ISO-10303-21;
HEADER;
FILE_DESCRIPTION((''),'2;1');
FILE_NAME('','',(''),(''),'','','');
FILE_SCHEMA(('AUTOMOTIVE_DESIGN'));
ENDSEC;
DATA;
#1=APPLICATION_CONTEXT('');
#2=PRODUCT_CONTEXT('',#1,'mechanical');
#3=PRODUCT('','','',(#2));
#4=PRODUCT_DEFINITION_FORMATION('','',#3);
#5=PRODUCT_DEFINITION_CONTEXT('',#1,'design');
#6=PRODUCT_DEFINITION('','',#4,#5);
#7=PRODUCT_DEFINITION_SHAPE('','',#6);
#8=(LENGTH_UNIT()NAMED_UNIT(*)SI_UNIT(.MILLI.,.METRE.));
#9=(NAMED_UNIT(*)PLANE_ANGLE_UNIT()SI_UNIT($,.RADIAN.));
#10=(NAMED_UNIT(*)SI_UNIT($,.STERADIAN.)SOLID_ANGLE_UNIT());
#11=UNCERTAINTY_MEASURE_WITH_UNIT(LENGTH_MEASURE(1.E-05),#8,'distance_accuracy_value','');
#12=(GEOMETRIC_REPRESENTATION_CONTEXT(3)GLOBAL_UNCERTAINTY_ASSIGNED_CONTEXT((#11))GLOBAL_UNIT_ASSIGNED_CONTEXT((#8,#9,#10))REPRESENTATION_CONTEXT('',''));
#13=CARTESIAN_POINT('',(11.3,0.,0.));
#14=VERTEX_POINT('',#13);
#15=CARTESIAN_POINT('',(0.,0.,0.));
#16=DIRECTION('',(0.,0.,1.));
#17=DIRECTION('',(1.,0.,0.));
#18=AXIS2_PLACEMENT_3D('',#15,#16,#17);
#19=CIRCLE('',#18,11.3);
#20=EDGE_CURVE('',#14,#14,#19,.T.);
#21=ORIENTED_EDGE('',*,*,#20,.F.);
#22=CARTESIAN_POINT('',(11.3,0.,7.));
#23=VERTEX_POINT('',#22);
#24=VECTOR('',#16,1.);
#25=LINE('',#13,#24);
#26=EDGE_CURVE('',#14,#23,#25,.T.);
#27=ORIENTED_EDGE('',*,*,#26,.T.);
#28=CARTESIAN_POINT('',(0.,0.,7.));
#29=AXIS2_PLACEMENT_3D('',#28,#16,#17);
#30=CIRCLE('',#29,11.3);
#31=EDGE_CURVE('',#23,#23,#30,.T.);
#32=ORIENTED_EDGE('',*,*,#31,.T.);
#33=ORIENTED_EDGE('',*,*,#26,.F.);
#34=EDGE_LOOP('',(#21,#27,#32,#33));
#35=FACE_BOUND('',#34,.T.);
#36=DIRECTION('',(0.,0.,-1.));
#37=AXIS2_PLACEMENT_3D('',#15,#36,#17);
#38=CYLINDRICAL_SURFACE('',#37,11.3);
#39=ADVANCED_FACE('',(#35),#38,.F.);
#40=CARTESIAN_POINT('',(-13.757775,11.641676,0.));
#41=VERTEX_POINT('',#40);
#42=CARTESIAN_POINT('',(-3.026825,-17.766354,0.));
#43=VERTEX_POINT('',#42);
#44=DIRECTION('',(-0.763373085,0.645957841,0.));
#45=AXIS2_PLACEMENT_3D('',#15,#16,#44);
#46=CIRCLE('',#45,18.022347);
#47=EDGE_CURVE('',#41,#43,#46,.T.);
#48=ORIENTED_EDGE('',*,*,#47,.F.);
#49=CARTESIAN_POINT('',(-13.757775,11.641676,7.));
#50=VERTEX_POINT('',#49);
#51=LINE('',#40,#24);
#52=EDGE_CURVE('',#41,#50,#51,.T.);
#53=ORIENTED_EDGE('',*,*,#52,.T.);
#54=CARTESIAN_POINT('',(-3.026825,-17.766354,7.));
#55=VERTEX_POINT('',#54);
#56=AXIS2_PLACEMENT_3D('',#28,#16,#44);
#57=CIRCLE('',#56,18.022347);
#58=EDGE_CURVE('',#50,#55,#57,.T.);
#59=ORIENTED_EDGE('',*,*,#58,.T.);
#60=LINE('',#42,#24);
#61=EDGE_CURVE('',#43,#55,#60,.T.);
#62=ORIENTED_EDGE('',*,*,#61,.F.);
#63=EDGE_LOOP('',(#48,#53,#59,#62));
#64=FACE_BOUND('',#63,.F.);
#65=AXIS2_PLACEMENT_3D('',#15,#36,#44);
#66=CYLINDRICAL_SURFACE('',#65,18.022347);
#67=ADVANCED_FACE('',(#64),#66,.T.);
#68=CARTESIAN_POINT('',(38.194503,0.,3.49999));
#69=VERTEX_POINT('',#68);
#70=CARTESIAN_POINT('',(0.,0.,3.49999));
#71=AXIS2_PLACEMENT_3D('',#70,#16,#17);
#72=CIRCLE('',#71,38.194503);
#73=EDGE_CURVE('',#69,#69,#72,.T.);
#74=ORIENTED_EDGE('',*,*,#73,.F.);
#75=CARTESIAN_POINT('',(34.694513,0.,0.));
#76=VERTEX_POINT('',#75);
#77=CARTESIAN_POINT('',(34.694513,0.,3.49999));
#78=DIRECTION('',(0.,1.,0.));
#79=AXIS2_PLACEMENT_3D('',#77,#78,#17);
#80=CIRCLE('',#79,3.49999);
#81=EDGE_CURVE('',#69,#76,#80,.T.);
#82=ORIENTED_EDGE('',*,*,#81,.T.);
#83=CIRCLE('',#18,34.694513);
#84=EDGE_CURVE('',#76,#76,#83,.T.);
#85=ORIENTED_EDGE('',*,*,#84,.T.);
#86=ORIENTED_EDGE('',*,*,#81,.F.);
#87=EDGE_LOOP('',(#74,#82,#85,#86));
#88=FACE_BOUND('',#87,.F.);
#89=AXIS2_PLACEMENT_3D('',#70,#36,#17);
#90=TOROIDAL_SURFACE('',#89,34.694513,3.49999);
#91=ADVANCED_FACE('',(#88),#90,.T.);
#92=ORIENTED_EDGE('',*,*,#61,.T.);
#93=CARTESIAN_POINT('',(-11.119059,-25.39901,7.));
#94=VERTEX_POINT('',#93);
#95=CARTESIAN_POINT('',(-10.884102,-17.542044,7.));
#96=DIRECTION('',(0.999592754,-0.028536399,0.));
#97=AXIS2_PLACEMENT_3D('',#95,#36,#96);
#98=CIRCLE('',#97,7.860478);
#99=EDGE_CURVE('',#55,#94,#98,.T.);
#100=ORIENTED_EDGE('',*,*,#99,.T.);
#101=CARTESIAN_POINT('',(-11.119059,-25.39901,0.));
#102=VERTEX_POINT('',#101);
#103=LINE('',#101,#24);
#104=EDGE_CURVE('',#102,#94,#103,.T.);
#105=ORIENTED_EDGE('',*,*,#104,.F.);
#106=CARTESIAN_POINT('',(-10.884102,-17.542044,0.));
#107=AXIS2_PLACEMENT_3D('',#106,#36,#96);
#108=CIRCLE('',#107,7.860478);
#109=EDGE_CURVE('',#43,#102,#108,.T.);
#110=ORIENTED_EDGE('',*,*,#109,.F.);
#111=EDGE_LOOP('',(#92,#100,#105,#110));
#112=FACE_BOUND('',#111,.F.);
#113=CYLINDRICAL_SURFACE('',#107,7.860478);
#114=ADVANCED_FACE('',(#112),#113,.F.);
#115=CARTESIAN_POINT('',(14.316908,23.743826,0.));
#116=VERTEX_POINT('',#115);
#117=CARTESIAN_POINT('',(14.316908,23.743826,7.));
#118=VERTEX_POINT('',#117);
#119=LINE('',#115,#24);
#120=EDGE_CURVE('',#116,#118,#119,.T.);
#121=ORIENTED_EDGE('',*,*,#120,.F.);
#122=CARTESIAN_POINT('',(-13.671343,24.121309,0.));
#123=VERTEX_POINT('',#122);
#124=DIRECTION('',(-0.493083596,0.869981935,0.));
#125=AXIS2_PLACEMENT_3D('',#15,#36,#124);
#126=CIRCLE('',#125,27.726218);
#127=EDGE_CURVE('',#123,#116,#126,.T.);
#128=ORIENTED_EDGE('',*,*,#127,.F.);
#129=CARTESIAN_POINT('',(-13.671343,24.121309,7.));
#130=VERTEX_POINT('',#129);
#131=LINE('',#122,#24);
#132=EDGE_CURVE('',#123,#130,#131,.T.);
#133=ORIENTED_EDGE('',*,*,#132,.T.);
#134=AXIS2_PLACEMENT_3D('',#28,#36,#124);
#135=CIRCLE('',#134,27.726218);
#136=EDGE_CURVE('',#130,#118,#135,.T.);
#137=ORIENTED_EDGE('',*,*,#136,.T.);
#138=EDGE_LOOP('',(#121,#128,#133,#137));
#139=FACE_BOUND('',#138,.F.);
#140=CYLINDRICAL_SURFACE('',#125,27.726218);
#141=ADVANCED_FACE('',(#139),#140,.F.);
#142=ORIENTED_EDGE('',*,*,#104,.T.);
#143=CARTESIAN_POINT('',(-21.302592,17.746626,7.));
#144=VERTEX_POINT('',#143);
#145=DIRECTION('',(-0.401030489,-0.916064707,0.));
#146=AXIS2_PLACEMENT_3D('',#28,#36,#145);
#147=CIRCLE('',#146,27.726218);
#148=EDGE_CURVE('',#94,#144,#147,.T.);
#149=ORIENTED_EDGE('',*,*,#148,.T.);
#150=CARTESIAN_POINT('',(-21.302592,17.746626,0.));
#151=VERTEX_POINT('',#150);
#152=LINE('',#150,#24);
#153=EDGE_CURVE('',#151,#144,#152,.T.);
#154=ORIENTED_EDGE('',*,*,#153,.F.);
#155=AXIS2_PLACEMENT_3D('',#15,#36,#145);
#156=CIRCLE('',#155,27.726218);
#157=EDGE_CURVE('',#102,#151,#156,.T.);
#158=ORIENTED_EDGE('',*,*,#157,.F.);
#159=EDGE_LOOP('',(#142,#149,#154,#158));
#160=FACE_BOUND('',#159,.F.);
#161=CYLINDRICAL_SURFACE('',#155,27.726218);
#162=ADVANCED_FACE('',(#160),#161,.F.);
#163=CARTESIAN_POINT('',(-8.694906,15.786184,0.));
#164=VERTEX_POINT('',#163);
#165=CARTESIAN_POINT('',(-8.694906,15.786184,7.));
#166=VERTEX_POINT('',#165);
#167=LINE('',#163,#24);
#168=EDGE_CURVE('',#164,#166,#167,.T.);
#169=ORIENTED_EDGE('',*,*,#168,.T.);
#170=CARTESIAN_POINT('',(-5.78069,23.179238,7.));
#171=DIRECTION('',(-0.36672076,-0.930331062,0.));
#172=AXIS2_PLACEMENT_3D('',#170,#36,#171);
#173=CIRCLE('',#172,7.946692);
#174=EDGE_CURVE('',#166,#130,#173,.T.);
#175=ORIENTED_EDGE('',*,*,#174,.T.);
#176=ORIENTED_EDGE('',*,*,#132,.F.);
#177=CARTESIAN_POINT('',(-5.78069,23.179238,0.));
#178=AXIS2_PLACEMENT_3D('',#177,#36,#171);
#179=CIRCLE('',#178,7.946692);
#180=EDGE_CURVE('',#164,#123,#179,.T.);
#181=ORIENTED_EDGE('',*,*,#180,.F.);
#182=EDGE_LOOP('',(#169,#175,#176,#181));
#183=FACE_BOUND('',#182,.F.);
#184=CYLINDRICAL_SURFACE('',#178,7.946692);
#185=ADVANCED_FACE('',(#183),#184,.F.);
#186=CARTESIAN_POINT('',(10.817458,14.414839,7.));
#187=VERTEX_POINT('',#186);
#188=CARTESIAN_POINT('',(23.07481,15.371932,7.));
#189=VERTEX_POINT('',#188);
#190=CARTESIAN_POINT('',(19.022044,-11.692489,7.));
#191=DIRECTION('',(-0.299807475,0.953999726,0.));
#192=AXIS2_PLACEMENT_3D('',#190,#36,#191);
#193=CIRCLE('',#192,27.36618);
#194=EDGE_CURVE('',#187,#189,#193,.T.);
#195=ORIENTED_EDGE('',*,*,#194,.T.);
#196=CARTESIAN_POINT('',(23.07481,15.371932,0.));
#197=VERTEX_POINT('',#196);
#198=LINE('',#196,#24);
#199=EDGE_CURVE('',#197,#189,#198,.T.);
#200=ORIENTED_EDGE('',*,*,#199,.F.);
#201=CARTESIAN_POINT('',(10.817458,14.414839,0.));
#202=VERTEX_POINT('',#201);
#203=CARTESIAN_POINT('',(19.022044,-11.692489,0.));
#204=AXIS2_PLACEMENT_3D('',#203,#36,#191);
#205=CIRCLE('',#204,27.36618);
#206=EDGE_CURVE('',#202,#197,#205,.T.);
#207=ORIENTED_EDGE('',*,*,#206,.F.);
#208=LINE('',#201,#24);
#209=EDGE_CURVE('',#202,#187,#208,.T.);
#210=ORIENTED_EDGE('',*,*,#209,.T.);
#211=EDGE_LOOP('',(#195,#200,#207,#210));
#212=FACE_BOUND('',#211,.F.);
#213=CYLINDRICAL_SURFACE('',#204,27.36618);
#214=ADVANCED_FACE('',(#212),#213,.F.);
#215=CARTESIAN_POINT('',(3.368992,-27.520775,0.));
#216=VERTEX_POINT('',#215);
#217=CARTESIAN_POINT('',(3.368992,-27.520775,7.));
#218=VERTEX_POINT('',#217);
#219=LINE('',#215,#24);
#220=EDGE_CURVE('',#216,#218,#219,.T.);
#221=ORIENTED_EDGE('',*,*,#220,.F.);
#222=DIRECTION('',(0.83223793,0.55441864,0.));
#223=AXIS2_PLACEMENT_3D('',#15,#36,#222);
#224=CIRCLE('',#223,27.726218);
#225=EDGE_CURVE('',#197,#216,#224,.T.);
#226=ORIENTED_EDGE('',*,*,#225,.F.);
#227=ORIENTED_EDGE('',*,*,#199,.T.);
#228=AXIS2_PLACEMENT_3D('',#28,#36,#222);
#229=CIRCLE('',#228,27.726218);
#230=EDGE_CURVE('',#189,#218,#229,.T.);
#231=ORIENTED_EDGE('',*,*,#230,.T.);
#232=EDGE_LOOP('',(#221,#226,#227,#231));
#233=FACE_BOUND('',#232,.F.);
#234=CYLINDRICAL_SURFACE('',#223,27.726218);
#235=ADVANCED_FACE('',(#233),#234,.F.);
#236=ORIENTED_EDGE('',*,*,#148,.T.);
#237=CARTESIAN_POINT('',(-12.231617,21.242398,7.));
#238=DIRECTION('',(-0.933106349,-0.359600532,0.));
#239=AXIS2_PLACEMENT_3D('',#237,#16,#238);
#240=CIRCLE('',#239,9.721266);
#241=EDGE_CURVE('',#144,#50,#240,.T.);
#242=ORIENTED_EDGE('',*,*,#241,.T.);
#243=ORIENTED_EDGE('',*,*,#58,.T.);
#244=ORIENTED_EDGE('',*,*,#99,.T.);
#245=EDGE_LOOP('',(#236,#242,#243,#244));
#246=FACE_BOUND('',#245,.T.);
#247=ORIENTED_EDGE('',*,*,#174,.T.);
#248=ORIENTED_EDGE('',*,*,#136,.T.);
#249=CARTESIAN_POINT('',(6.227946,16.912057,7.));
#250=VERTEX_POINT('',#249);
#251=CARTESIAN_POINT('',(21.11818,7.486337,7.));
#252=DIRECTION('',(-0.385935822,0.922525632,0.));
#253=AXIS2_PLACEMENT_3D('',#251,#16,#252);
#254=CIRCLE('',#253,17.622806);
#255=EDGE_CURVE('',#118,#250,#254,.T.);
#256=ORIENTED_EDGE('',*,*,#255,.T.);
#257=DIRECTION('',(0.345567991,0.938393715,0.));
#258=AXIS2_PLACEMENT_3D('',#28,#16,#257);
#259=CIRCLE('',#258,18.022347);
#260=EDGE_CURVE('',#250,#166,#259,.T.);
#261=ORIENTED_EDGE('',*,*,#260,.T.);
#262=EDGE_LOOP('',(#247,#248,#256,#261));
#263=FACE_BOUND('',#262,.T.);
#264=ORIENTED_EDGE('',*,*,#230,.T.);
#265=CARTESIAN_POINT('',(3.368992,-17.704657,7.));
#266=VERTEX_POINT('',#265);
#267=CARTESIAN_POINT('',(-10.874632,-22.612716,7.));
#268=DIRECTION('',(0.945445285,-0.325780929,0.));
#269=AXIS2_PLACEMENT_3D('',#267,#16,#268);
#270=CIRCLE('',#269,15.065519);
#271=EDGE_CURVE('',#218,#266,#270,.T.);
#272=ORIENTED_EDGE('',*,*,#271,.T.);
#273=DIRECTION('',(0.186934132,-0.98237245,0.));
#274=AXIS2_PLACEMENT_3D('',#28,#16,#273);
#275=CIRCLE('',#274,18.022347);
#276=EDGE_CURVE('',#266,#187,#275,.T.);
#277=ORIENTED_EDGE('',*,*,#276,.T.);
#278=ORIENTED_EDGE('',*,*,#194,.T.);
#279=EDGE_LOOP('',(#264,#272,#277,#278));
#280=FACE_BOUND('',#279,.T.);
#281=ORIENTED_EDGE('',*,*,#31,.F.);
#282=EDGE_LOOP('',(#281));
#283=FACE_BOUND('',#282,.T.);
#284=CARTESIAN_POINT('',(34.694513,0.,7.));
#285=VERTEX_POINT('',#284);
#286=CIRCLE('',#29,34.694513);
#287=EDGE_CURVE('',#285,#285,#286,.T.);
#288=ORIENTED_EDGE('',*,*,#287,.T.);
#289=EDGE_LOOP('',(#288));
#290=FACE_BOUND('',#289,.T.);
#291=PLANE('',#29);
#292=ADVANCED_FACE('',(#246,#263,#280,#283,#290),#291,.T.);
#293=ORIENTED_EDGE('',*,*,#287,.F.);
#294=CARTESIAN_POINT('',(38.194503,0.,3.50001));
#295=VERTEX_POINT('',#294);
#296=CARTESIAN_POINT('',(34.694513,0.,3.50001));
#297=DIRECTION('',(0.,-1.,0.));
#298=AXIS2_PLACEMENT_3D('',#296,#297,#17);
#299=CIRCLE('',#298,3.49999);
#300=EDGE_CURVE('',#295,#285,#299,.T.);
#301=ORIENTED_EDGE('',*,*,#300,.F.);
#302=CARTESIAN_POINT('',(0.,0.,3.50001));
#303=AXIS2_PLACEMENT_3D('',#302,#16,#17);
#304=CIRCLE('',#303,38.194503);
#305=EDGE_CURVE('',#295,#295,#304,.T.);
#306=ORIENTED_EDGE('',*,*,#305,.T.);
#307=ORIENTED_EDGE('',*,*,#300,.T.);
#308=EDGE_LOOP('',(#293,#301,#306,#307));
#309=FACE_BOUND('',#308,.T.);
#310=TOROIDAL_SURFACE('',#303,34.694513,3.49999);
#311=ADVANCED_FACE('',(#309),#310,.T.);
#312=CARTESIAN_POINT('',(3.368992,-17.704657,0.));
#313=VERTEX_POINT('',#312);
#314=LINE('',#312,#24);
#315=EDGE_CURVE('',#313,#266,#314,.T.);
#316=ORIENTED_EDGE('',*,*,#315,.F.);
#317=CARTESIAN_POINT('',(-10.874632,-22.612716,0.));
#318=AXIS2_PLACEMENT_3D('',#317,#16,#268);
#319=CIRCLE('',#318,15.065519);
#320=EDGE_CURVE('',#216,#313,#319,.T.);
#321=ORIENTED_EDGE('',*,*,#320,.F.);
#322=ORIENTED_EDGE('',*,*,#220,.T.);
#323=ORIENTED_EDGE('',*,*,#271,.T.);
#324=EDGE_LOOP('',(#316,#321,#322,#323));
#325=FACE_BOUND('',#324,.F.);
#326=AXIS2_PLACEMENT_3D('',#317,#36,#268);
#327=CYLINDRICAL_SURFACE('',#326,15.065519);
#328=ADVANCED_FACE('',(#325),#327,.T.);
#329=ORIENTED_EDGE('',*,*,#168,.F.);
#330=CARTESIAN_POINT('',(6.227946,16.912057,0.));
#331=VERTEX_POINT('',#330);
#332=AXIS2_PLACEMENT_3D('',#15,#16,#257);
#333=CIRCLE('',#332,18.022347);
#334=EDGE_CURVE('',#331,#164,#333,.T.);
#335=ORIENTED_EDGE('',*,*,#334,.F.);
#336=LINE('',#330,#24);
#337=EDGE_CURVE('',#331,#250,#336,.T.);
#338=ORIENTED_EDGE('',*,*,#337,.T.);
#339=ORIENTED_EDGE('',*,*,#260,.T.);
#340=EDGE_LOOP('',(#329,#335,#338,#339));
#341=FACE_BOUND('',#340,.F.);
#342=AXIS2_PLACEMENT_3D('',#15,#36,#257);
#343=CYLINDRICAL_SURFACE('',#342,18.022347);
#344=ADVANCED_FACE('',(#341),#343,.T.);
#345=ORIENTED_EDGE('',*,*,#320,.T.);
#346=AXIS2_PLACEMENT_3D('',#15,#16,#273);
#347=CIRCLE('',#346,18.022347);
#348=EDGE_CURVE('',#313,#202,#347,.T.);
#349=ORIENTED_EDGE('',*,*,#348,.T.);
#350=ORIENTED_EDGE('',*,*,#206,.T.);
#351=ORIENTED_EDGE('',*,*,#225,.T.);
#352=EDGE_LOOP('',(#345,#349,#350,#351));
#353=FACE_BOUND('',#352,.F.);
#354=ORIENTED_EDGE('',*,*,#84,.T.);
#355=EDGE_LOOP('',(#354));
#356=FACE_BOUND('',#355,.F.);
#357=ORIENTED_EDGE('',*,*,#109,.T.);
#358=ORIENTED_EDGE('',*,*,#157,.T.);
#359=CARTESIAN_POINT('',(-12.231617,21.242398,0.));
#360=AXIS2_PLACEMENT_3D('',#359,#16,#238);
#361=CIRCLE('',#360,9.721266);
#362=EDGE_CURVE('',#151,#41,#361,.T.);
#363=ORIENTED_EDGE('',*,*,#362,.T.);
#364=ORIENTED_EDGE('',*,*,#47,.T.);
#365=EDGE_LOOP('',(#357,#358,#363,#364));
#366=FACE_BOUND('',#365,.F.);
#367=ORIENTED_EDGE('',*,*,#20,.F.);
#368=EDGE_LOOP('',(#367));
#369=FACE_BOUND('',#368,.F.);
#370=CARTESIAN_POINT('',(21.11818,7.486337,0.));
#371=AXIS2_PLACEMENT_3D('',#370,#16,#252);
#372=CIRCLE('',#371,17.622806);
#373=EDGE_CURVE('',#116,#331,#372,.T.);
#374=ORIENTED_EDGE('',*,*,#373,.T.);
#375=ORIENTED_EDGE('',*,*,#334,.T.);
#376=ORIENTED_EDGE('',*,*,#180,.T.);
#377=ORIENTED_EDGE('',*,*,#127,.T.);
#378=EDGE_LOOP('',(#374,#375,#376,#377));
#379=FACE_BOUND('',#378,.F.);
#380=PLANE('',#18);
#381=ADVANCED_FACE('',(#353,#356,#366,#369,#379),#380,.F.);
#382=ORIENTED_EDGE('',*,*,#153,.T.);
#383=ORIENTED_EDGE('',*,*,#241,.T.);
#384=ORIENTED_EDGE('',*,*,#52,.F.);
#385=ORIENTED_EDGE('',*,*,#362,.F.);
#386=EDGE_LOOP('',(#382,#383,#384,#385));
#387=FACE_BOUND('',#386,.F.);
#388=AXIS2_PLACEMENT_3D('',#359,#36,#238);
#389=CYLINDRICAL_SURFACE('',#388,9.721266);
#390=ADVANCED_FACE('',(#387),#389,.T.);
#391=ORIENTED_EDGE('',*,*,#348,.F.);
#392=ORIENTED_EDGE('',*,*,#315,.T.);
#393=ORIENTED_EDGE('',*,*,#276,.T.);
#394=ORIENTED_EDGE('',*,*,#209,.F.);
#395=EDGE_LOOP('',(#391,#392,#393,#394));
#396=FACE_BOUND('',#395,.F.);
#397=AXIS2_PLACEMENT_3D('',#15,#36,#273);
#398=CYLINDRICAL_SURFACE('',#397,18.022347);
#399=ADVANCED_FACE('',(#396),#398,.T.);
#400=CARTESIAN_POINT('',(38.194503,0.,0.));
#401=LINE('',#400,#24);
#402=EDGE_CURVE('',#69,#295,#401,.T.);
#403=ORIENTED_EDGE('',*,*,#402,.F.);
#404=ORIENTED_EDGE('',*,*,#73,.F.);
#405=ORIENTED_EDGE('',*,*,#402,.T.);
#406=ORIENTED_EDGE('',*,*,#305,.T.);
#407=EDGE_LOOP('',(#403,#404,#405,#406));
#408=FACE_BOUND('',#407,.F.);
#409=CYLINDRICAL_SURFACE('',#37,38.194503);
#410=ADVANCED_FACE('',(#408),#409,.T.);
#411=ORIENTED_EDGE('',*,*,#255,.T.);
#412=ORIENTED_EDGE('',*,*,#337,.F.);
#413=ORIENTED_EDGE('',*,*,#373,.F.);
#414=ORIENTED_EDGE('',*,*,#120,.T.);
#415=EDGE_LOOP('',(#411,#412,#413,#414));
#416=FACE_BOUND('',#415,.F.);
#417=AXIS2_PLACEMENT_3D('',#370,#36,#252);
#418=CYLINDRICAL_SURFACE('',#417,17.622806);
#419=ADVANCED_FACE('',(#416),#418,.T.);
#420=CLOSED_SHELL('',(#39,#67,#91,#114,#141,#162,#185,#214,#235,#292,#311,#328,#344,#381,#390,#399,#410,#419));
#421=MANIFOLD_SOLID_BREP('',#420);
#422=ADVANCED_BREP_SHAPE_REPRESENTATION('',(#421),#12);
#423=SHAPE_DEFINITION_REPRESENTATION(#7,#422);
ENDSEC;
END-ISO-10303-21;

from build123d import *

# Parameters (mm, degrees)
F0_R     = 38.1945033512
F0_R_2   = 11.3
F1_DEPTH = 7
F2_R     = 3.49999


# Not quite as in the source:
# - a fillet or chamfer is up to 0.001 mm smaller than in the source, because OpenCascade refuses the exact size


with BuildPart() as f1:
    # F0 (on Top) → F1 (new body)
    with BuildSketch(Plane.XY):
        Circle(F0_R)
        with BuildLine():
            ThreePointArc((-11.1190587191, -25.3990096631), (-26.9847609568, -6.3691313979), (-21.3025923236, 17.7466255653))
            ThreePointArc((-21.3025923236, 17.7466255653), (-18.3465502514, 13.6852419499), (-13.7577746625, 11.6416763896))
            ThreePointArc((-13.7577746625, 11.6416763896), (-16.9304092047, -6.1778828887), (-3.0268251987, -17.7663536507))
            ThreePointArc((-3.0268251987, -17.7663536507), (-5.4906522747, -23.2602441725), (-11.1190587191, -25.3990096631))
        make_face(mode=Mode.SUBTRACT)
        with BuildLine():
            ThreePointArc((3.3689917925, -27.5207749339), (4.1908869079, -22.6127160748), (3.3689917925, -17.7046572157))
            ThreePointArc((3.3689917925, -17.7046572157), (17.5564618696, -4.0713191283), (10.8174583905, 14.4148391179))
            ThreePointArc((10.8174583905, 14.4148391179), (16.8916900663, 15.5906448864), (23.0748101796, 15.3719320138))
            ThreePointArc((23.0748101796, 15.3719320138), (25.1945379599, -11.5749045633), (3.3689917925, -27.5207749339))
        make_face(mode=Mode.SUBTRACT)
        Circle(F0_R_2, mode=Mode.SUBTRACT)
        with BuildLine():
            ThreePointArc((-8.6949064417, 15.7861836678), (-12.603803519, 19.1055384299), (-13.6713432148, 24.1213086993))
            ThreePointArc((-13.6713432148, 24.1213086993), (0.373914134, 27.7236964866), (14.3169083029, 23.7438264673))
            ThreePointArc((14.3169083029, 23.7438264673), (9.7472249081, 20.9497927504), (6.2279462514, 16.9120571875))
            ThreePointArc((6.2279462514, 16.9120571875), (-1.3558653844, 17.9712721276), (-8.6949064417, 15.7861836678))
        make_face(mode=Mode.SUBTRACT)
    extrude(amount=F1_DEPTH)

    # F2 (radius 3.5 in the source; OpenCascade refuses exactly that, so slightly less here)
    f2_edges = [f1.edges().sort_by_distance(p)[0] for p in [
        (-38.194503, 0, 7),
        (-38.194503, 0, 0),
    ]]
    fillet(f2_edges, radius=F2_R)


solid = f1.part
